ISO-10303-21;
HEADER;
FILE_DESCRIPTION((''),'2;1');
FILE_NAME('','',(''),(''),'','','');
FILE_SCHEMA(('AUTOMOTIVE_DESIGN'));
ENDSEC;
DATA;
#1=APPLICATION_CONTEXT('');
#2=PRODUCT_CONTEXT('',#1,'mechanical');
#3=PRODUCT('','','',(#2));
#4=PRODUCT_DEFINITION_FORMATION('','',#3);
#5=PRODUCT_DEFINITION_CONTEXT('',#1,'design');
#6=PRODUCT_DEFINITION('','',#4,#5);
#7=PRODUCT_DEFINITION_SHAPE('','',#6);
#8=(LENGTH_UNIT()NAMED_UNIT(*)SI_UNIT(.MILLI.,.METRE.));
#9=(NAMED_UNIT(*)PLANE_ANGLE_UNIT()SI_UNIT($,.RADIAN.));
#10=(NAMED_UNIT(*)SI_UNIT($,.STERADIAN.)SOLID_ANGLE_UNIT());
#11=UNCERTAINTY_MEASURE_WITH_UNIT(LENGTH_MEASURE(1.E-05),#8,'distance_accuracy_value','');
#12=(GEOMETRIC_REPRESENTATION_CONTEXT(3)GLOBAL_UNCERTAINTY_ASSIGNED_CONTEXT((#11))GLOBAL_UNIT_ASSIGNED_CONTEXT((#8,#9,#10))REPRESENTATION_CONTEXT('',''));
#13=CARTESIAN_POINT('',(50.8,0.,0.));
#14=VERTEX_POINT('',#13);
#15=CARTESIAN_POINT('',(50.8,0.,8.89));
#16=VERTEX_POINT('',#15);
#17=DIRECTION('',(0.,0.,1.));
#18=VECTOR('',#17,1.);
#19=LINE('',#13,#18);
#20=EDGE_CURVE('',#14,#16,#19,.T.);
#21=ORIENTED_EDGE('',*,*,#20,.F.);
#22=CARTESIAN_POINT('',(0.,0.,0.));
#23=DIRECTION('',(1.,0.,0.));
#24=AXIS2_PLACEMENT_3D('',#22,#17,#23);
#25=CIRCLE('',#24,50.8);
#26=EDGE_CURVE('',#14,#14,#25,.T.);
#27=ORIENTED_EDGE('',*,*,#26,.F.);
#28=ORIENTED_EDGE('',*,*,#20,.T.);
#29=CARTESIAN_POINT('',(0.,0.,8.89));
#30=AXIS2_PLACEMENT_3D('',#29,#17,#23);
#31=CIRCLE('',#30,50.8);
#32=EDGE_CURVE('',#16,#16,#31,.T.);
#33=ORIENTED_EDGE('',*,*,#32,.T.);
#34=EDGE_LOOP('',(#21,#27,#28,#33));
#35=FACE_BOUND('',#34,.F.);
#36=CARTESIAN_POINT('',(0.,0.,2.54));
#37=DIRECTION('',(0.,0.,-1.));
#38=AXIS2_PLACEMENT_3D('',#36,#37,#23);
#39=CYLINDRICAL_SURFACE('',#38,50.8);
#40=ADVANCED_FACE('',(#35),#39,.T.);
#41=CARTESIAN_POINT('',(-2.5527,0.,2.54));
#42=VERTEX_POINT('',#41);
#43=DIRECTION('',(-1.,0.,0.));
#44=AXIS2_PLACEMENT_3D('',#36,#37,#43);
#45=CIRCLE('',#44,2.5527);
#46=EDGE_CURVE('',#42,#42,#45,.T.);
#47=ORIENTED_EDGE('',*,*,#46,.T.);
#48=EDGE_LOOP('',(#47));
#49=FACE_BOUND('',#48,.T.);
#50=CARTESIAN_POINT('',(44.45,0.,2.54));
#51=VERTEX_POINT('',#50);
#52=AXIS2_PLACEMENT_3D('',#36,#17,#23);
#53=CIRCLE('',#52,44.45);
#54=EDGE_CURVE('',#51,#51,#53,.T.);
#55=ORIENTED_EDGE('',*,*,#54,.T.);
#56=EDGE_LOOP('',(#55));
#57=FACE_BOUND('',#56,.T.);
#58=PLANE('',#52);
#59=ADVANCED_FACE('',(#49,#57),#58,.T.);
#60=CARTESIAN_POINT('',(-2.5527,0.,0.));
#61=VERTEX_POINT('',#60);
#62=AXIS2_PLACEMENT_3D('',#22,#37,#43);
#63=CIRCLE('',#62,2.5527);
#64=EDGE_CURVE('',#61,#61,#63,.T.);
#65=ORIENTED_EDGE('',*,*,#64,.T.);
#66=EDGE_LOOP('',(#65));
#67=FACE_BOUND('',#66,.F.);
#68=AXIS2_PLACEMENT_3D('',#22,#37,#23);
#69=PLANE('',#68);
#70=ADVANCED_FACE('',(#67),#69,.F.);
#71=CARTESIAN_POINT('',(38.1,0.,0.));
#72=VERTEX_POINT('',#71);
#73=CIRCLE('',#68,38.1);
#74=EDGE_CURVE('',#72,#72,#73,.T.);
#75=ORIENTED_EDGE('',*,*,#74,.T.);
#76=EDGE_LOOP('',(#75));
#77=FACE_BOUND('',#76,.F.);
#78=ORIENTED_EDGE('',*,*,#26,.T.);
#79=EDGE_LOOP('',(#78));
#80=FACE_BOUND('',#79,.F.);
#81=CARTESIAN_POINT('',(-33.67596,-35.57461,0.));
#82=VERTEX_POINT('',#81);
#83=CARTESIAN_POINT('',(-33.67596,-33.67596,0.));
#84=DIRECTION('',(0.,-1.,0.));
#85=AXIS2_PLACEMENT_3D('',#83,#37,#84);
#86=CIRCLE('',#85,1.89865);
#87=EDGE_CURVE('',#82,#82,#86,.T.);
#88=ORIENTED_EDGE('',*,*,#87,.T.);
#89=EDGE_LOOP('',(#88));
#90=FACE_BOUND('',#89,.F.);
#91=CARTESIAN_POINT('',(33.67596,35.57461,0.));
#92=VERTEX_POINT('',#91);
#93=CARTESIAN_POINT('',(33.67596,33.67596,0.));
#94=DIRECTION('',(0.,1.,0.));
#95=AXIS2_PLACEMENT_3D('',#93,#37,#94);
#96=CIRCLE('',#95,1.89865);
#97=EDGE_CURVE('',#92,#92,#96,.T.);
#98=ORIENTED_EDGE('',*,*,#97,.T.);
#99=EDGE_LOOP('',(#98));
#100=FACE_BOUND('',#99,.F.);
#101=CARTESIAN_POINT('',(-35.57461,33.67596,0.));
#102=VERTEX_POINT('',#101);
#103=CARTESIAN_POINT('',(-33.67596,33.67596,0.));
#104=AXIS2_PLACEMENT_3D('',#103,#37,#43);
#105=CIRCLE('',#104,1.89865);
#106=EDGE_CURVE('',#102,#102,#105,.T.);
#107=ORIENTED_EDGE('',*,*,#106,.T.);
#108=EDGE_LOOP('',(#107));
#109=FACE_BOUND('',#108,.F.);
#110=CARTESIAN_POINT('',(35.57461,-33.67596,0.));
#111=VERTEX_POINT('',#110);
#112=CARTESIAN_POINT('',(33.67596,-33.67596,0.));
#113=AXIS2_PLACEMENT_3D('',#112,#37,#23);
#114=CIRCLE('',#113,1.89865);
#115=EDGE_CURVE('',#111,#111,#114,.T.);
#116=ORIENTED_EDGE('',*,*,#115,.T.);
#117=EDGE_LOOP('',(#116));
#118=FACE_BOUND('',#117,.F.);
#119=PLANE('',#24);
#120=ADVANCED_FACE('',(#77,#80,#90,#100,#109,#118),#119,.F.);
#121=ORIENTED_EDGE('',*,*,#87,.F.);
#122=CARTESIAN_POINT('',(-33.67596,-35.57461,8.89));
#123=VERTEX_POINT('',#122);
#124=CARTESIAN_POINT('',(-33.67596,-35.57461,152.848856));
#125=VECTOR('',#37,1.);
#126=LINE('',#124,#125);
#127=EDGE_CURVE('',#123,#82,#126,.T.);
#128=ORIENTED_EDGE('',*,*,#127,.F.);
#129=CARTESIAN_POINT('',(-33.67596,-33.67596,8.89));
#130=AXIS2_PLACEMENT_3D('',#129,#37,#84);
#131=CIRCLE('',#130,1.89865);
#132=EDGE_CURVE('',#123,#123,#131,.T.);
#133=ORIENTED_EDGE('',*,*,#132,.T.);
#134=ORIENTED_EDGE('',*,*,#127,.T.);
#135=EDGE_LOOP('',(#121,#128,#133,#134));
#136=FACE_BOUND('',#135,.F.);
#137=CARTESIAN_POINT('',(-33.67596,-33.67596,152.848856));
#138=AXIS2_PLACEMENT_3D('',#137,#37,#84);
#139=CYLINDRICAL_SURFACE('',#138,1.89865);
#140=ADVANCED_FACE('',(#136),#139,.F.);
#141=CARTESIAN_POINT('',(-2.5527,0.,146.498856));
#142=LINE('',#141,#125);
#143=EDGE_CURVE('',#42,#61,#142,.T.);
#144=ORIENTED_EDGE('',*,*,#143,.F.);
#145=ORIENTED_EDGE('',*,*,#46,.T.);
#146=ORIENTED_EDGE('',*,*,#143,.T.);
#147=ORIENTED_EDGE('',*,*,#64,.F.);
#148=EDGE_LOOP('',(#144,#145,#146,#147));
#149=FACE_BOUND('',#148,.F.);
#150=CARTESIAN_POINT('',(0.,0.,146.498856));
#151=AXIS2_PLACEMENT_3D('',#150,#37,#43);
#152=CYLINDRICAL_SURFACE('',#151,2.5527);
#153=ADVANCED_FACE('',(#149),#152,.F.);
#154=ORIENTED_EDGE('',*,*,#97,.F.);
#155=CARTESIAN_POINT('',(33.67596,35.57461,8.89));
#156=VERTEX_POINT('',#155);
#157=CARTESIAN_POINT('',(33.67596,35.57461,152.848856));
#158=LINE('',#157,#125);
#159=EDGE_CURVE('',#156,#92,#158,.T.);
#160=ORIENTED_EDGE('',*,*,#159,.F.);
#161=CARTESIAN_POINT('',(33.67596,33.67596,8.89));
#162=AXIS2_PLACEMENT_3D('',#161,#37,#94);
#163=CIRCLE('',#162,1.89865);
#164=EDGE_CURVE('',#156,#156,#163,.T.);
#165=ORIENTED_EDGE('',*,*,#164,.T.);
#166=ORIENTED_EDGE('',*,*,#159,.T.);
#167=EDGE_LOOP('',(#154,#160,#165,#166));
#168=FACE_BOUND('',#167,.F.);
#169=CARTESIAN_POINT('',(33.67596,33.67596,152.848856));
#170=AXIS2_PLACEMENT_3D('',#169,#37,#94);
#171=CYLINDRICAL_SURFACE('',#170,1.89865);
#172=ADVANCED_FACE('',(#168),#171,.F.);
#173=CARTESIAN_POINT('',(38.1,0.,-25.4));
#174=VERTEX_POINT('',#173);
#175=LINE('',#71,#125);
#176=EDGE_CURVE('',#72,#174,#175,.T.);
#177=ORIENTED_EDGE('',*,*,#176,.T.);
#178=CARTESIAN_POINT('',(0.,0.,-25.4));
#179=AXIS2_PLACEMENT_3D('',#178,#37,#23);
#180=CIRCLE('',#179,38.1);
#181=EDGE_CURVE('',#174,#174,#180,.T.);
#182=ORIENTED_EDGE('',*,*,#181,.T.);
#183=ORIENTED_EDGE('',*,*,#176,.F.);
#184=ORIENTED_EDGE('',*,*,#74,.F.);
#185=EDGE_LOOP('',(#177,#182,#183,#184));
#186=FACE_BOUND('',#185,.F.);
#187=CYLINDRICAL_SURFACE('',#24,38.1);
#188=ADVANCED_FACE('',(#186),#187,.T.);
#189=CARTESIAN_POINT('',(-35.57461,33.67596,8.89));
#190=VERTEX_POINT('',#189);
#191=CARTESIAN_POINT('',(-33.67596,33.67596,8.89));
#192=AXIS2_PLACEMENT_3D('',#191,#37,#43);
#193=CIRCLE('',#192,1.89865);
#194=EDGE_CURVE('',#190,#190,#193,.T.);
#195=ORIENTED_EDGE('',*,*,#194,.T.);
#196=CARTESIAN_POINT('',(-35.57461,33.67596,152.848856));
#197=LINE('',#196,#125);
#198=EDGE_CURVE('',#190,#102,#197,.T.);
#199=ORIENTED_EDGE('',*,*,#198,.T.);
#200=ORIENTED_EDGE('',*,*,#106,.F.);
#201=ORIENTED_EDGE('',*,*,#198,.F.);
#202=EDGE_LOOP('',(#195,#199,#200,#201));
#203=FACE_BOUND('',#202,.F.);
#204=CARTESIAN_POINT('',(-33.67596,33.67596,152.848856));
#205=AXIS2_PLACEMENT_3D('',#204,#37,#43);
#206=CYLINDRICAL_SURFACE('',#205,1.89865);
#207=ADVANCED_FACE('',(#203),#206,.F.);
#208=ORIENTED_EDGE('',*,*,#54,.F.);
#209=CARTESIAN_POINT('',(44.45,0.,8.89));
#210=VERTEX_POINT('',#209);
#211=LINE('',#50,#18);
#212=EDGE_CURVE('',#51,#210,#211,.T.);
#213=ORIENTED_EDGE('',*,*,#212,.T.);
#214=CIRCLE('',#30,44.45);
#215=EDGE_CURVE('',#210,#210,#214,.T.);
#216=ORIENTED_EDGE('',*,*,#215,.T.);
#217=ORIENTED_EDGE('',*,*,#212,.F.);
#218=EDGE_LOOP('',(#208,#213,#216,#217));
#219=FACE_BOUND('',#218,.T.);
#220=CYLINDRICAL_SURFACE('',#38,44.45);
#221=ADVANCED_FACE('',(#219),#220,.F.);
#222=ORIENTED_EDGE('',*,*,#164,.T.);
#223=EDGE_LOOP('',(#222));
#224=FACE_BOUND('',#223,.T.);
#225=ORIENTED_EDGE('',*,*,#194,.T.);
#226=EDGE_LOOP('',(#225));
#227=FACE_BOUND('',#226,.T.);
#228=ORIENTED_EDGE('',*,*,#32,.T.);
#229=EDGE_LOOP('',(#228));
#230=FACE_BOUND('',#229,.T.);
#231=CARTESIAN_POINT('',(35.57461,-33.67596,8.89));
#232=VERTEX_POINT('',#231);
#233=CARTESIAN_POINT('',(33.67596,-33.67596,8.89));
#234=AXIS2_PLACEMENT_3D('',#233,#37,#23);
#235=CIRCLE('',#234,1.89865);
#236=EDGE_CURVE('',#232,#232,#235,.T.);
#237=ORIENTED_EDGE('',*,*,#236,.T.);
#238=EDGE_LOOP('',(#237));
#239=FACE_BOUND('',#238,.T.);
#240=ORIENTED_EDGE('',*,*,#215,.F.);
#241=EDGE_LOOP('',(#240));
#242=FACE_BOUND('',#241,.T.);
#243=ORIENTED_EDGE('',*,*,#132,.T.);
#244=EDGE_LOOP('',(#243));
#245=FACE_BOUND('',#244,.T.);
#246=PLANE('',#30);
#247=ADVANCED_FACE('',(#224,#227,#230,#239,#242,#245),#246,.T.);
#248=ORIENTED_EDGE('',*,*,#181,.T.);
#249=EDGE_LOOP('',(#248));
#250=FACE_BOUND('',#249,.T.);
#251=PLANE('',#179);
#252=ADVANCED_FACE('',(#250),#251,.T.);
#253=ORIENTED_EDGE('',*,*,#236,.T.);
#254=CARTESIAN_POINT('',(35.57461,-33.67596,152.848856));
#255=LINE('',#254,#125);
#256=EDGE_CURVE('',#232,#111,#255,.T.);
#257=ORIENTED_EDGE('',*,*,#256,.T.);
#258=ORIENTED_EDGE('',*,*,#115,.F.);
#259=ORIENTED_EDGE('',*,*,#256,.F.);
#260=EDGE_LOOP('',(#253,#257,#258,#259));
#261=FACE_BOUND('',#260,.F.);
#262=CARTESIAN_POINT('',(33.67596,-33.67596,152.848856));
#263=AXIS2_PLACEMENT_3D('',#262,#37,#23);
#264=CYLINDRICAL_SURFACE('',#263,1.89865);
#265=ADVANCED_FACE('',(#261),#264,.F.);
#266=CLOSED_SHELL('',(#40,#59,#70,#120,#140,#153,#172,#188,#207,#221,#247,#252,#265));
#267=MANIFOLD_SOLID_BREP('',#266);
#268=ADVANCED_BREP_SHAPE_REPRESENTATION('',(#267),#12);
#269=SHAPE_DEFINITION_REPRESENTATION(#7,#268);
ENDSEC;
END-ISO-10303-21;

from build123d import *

# Parameters (mm, degrees)
F0_R            = 50.8
F1_DEPTH        = 2.54
F2_R            = 50.8
F2_R_2          = 44.45
F3_DEPTH        = 6.35
F5_D            = 3.7973
F5_COPIES_COUNT = 4
F7_D            = 5.1054
F8_R            = 38.1
F8_R_2          = 2.5527
F9_DEPTH        = 25.4


# Not quite as in the source:
# - a pattern or mirror of a feature is missing from the dataset's text; its kind, count and spacing are read off the source's solid


with BuildPart() as f1:
    # F0 (on Top) → F1 (new body)
    with BuildSketch(Plane.XY):
        Circle(F0_R)
    extrude(amount=F1_DEPTH)

    # F2 (on face) → F3 (join)
    with BuildSketch(Plane.XY.offset(2.54)):
        Circle(F2_R)
        Circle(F2_R_2, mode=Mode.SUBTRACT)
    extrude(amount=F3_DEPTH)

    # F5 (through all)
    with Locations(Plane.XY.offset(8.89)):
        with Locations((-33.675960454, 33.675960454)):
            f5 = Hole(F5_D / 2)

    # F5_copies: F5 ×4 about axis
    f5_copies_axis = Axis((0, 0, 0), (0, 0, 1))
    for i in range(1, F5_COPIES_COUNT):
        add(f5.rotate(f5_copies_axis, i * 360 / F5_COPIES_COUNT), mode=Mode.SUBTRACT)

    # F7 (through all)
    with Locations(Plane.XY.offset(2.54)):
        with Locations((0, 0)):
            Hole(F7_D / 2)

    # F8 (on face) → F9 (join)
    with BuildSketch(Plane(origin=(0, 0, 0), x_dir=(1, 0, 0), z_dir=(0, 0, -1))):
        Circle(F8_R)
        Circle(F8_R_2, mode=Mode.SUBTRACT)
        Circle(F8_R_2)
    extrude(amount=F9_DEPTH)


solid = f1.part
